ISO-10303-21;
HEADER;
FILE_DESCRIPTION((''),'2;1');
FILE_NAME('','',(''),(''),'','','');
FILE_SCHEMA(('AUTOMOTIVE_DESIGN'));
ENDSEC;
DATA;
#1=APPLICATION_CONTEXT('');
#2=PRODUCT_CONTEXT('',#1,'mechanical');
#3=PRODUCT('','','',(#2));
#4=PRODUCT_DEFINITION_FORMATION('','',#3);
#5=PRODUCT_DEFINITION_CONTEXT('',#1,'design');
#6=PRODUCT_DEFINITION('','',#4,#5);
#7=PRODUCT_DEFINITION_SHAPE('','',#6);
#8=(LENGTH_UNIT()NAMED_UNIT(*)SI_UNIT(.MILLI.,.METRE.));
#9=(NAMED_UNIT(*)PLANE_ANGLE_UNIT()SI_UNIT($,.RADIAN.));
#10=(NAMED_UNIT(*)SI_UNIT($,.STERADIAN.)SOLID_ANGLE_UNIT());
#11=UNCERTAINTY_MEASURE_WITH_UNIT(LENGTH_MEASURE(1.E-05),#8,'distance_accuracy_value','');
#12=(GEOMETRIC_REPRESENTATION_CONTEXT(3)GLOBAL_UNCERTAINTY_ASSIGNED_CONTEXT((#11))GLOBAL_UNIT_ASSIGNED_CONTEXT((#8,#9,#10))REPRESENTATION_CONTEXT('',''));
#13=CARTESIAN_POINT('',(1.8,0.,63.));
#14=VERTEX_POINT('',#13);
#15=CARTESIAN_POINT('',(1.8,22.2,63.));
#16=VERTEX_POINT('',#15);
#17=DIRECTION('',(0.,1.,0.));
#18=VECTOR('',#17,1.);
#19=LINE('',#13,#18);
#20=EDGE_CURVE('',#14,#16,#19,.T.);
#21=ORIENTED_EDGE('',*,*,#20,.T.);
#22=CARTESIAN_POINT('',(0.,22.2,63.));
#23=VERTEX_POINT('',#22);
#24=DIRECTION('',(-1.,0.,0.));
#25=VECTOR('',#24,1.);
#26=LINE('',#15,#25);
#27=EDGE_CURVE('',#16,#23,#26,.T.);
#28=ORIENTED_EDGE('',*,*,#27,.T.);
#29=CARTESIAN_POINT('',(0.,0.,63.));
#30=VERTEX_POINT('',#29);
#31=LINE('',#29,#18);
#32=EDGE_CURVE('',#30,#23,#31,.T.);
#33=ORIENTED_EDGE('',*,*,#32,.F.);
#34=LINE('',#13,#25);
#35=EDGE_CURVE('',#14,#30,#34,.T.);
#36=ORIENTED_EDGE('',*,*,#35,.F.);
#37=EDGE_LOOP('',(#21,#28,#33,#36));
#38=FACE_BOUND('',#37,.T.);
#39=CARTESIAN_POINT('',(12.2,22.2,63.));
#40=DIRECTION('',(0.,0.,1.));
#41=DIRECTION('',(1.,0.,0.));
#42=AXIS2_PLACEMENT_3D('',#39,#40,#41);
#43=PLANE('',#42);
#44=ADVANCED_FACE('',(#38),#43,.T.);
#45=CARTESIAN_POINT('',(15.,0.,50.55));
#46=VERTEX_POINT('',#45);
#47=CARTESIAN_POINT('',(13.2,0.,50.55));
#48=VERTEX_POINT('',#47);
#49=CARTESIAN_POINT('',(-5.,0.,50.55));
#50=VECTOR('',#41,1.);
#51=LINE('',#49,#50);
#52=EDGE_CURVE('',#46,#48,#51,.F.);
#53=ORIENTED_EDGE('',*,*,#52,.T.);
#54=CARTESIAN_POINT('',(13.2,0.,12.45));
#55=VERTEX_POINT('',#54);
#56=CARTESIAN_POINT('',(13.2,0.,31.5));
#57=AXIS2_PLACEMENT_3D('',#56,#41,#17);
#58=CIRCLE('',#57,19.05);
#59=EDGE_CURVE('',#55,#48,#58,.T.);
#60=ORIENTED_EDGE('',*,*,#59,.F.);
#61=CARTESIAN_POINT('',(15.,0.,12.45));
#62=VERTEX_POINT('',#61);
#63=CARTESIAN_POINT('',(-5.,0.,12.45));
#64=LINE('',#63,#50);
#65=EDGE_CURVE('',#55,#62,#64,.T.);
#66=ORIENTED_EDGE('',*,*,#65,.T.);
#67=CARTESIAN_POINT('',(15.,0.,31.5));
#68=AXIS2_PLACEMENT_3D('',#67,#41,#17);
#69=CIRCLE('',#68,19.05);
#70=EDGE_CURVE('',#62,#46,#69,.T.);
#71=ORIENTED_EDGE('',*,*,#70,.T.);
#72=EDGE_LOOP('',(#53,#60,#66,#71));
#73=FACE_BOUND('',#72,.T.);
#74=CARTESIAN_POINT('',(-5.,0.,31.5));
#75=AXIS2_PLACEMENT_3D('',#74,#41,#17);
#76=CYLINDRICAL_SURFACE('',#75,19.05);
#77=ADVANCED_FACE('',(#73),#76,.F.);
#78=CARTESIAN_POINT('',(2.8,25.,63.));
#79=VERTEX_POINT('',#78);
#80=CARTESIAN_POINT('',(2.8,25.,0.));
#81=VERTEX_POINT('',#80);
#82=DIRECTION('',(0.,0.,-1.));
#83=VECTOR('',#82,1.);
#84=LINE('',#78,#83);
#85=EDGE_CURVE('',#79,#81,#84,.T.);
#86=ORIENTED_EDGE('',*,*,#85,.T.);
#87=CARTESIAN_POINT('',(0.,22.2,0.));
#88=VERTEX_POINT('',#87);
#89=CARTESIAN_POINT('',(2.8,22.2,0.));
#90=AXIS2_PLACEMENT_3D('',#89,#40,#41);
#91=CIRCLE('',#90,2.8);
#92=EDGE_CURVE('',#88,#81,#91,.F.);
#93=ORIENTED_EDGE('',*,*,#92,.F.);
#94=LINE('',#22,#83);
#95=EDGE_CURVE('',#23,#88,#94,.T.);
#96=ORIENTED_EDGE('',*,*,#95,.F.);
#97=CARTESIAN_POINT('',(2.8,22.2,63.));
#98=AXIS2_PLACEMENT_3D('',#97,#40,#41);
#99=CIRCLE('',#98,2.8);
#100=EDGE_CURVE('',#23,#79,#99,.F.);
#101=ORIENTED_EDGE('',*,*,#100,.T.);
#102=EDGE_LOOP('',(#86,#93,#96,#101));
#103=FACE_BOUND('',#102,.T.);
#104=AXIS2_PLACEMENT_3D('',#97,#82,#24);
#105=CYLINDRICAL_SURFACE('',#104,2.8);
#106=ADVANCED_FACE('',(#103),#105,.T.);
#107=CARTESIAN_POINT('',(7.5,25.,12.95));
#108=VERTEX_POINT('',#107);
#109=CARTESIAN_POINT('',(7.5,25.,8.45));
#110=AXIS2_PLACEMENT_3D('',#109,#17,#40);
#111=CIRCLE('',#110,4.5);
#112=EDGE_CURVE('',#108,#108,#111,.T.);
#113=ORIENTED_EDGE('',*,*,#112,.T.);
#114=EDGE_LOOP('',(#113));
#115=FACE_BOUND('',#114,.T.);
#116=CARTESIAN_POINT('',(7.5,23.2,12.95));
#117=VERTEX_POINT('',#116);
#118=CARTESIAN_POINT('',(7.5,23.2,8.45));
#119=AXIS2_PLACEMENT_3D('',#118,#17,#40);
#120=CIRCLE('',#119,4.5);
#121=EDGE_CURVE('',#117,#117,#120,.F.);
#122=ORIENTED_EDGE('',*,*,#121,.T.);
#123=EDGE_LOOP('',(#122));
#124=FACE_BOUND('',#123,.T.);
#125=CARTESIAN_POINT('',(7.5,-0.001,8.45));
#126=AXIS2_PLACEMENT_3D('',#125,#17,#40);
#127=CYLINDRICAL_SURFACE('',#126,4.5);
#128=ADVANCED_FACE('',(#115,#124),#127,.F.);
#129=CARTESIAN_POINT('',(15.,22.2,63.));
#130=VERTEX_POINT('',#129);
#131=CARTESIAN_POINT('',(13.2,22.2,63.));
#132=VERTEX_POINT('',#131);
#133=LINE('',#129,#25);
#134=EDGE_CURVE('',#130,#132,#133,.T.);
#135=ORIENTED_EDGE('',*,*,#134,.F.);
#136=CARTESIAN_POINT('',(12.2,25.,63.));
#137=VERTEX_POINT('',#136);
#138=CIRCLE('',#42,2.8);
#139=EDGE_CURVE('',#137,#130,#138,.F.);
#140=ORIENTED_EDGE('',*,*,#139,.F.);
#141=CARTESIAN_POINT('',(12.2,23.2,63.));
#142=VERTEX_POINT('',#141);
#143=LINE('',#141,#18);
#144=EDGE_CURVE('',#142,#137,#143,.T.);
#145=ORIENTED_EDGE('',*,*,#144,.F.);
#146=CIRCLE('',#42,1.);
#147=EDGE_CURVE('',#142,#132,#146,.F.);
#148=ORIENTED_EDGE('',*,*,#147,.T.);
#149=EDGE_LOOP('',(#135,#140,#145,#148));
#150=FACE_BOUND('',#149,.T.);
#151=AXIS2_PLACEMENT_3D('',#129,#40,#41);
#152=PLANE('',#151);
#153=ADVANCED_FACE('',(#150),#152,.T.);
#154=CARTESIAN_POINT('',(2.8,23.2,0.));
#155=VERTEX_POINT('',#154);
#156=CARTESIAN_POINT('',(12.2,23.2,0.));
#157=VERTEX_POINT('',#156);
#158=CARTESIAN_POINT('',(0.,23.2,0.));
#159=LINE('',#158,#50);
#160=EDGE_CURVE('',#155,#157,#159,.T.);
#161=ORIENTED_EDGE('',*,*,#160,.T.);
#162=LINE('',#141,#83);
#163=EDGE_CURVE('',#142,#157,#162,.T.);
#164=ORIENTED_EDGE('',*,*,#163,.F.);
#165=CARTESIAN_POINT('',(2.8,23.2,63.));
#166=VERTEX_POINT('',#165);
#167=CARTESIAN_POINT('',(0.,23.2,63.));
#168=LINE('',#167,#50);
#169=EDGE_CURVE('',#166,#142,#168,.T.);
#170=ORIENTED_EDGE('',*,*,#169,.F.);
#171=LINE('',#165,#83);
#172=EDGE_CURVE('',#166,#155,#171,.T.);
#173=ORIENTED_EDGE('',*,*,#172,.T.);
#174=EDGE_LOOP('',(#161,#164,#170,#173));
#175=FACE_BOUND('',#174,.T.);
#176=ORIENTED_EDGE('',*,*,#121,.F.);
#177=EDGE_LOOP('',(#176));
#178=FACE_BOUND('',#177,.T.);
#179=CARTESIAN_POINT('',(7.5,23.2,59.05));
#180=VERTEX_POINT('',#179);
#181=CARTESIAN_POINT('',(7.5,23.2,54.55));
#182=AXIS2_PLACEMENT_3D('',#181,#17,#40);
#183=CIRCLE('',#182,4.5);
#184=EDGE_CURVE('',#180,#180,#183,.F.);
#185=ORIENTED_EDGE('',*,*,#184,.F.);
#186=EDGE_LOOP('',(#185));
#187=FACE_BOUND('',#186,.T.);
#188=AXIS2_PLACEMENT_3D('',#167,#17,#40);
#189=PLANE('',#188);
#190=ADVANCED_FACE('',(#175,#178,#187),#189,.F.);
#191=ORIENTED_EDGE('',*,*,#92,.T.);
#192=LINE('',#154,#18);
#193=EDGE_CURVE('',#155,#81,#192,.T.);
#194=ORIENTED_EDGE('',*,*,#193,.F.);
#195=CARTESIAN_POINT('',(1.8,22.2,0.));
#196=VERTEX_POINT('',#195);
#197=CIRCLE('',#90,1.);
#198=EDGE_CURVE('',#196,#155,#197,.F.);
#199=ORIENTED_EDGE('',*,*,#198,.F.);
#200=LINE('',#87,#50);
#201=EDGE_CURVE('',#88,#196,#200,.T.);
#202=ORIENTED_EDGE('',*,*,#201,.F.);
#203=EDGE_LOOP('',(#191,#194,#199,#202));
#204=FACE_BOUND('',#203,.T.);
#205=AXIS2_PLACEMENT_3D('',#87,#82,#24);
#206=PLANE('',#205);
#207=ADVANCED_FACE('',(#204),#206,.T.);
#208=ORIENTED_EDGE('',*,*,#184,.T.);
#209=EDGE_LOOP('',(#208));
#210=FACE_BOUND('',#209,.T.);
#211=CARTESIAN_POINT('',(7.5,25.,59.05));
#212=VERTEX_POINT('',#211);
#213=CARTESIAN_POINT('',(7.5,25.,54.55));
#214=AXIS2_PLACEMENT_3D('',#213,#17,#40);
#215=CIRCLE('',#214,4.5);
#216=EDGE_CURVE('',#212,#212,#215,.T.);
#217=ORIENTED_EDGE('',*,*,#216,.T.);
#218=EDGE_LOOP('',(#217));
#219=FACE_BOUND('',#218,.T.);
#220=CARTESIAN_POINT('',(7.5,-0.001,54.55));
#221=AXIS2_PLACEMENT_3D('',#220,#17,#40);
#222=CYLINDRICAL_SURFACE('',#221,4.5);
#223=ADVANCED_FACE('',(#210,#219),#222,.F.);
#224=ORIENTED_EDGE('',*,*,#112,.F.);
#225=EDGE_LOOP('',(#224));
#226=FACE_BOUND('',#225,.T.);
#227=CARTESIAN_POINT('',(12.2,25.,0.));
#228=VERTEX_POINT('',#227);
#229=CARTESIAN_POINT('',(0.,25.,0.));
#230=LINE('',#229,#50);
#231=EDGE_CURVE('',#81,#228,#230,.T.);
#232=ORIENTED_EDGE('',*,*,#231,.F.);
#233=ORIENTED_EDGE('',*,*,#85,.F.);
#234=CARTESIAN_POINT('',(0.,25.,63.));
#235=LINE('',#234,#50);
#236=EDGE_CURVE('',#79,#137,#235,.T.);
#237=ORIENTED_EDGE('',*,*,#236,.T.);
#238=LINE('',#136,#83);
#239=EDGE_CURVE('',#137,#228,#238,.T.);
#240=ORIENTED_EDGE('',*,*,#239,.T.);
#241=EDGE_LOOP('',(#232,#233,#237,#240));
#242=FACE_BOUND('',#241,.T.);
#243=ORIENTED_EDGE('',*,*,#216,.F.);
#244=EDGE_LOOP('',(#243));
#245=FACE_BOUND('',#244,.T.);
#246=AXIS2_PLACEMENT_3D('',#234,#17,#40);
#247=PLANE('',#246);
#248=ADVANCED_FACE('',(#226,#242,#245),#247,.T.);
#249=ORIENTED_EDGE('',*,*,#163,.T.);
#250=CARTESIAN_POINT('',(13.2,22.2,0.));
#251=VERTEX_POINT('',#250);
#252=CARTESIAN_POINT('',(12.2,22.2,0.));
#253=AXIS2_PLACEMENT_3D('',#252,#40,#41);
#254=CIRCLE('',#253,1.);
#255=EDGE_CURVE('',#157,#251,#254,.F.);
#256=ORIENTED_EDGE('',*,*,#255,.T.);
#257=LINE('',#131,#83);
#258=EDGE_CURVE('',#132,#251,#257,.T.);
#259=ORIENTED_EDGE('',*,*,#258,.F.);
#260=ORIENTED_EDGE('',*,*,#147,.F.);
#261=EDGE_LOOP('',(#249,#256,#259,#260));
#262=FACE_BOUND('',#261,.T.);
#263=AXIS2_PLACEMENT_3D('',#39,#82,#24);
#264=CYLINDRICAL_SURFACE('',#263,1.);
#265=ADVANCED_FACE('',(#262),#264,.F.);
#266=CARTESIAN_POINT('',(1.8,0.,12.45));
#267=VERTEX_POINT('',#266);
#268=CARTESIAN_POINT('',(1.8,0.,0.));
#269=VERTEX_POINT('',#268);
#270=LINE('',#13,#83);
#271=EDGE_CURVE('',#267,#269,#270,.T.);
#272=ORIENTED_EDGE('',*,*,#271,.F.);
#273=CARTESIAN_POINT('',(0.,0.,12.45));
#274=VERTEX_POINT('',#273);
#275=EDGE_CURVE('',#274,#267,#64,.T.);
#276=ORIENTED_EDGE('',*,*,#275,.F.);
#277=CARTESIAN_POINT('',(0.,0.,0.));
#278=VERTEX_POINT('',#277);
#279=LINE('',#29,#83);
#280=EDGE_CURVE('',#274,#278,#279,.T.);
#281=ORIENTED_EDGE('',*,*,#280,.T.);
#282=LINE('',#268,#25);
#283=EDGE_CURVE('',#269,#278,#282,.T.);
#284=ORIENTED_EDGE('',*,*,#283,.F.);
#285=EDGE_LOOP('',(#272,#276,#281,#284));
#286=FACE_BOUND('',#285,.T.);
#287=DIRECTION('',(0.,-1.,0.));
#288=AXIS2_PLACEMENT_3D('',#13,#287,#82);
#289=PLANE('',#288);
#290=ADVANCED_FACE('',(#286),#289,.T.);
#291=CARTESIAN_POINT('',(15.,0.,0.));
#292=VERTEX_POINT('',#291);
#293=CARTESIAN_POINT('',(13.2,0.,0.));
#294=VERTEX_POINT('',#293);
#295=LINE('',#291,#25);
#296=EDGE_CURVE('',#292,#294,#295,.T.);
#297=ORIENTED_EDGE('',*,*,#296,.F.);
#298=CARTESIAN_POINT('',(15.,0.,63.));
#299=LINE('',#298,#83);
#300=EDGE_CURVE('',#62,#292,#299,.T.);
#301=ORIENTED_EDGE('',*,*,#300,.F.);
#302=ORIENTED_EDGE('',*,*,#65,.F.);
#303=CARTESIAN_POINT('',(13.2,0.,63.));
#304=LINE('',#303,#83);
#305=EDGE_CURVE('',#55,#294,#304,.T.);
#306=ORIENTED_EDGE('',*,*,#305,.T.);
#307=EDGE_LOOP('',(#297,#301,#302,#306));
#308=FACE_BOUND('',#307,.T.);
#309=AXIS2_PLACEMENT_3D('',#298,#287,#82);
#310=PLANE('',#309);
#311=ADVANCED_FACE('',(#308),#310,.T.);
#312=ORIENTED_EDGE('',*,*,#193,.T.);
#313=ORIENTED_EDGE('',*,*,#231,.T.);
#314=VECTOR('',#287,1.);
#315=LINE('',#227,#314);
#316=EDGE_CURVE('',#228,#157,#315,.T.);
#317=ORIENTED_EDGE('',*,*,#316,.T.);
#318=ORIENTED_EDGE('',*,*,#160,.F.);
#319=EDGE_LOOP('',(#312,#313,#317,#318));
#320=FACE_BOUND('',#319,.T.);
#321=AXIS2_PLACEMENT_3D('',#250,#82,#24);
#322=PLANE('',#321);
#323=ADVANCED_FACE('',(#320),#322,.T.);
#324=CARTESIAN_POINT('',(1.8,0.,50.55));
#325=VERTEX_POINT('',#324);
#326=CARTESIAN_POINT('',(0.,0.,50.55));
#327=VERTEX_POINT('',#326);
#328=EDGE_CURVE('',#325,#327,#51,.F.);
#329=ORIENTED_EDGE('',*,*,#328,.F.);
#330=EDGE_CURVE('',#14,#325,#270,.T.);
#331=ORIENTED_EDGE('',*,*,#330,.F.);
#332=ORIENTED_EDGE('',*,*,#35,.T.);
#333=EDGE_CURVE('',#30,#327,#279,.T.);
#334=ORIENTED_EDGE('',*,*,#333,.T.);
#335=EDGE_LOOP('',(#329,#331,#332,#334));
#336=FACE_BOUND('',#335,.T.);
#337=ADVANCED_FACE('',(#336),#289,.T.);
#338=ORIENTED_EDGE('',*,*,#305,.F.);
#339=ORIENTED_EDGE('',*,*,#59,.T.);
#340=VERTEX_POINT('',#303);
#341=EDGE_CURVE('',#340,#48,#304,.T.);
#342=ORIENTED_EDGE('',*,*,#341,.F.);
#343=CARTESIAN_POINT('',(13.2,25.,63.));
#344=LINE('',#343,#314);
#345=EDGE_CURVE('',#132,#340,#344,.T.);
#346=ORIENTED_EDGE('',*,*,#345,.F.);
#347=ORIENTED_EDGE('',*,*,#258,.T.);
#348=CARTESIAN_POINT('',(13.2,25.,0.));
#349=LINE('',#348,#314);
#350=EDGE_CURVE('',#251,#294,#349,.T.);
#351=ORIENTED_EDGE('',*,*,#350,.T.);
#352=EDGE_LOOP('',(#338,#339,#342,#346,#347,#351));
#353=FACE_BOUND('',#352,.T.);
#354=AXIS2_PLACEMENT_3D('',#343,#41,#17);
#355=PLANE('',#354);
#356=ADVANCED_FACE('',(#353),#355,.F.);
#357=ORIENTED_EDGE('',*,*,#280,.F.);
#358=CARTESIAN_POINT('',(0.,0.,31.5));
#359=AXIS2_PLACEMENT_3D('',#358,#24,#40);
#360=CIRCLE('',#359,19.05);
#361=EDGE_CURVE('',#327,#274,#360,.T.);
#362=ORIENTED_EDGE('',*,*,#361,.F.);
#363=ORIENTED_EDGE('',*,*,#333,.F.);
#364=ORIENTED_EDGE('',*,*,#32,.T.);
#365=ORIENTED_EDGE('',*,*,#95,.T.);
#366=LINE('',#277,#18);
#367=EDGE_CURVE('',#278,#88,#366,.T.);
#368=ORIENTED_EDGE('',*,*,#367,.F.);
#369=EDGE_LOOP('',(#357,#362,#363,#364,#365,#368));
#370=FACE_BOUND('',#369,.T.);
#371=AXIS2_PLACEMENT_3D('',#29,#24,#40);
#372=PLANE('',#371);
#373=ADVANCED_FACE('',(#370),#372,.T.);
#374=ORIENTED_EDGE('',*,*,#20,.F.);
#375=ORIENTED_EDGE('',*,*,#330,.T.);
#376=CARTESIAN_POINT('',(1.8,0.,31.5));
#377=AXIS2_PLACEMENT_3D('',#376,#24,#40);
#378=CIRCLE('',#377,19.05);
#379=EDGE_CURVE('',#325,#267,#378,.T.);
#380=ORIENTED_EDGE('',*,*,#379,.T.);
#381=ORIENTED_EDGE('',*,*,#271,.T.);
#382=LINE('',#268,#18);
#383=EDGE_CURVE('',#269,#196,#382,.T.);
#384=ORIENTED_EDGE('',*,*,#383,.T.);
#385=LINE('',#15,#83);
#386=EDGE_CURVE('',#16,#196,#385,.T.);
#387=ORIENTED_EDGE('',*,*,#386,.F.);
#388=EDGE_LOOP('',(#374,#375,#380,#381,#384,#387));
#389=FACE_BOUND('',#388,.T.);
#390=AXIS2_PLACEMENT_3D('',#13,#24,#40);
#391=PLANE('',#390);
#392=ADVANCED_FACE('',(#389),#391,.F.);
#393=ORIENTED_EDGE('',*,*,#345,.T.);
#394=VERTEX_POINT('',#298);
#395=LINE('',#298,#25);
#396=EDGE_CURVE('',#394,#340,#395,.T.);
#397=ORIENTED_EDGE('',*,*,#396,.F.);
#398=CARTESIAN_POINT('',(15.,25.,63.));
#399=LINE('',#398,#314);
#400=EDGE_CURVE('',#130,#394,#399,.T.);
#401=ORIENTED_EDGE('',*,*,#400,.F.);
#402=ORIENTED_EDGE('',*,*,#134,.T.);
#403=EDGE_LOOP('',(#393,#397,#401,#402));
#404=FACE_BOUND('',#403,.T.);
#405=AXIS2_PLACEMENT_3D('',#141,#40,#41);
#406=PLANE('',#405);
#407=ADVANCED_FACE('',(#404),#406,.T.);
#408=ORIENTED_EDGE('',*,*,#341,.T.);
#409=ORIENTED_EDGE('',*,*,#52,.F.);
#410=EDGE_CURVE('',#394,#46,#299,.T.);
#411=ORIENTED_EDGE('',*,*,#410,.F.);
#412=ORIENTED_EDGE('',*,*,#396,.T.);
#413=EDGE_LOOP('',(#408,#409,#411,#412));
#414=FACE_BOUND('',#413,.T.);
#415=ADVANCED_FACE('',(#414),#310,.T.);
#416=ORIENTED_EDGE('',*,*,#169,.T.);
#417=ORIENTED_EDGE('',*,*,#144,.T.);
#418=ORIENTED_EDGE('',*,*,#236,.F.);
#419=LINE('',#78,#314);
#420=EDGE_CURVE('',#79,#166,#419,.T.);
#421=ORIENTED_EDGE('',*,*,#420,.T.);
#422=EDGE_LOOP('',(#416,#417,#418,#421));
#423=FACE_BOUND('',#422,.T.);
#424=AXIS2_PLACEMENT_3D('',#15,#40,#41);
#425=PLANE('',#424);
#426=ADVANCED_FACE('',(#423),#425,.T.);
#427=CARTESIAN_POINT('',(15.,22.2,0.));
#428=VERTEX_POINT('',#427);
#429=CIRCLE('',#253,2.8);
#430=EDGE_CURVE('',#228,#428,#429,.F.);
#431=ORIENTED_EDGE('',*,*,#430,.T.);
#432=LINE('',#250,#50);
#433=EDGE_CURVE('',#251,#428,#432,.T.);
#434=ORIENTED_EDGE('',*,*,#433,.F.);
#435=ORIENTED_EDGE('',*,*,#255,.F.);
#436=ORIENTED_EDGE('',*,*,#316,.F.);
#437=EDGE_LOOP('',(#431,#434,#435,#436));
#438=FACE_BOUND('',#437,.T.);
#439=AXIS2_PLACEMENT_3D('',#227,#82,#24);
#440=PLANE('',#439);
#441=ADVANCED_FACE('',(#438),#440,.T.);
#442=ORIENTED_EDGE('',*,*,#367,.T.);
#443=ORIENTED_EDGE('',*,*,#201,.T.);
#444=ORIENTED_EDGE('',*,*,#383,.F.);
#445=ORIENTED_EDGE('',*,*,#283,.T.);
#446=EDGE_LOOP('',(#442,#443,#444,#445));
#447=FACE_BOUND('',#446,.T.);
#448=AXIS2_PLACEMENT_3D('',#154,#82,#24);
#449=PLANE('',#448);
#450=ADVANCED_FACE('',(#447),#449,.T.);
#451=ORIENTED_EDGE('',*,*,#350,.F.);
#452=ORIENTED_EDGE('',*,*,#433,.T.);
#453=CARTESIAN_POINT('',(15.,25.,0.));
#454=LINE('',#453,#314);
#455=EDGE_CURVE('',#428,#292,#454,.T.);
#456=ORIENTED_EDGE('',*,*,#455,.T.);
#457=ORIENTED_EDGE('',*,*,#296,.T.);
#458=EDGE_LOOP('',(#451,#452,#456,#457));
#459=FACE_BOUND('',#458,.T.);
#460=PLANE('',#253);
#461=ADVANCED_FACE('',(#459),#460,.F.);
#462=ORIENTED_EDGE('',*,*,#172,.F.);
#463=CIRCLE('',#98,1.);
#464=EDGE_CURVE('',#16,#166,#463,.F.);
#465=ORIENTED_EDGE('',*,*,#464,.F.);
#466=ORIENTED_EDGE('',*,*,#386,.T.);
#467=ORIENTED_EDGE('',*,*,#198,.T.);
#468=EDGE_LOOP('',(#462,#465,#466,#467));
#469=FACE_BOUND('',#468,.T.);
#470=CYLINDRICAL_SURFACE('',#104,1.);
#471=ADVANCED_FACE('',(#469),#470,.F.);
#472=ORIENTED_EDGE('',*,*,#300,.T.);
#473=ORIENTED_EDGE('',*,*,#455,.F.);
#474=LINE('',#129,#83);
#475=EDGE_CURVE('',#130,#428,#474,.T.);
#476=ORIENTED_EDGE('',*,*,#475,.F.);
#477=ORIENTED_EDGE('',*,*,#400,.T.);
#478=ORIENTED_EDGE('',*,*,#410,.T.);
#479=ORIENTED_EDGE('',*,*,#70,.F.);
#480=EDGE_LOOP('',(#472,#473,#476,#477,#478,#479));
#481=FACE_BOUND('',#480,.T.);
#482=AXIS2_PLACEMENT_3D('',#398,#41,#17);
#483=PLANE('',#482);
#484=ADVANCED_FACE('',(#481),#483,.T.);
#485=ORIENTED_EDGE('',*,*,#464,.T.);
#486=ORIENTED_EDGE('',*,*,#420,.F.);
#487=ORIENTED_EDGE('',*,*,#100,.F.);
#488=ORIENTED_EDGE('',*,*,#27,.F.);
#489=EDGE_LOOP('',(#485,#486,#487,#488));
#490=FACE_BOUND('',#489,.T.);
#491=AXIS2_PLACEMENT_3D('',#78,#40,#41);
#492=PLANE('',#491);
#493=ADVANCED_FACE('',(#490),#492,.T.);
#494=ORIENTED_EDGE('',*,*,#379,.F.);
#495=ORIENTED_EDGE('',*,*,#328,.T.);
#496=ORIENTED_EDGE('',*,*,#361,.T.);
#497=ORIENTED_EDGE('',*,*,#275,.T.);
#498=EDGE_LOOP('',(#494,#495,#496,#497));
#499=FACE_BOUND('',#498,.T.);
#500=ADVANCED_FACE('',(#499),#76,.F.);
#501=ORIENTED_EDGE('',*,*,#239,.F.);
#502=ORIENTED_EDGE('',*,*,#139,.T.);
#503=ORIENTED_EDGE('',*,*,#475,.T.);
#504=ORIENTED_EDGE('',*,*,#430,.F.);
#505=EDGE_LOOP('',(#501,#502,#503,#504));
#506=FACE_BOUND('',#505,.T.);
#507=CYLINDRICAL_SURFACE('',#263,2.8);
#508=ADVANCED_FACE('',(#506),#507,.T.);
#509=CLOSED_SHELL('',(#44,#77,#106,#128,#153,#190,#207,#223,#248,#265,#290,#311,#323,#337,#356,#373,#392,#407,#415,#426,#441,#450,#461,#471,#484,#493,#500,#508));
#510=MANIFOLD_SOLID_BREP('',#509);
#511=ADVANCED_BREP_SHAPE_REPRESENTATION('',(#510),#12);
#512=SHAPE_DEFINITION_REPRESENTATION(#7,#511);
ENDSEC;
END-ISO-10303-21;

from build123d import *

# Parameters (mm, degrees)
FLANGE_BASE1_DEPTH    = 63
ESBO_O6_R             = 19.05
CORTE_EXTRUS_O1_DEPTH = 20
CORTE_EXTRUS_O2_REACH = 71.419
ESBO_O7_R             = 4.5


# Sheet-metal steps are written as plain solids
with BuildPart() as part:
    # Esboço1 → Flange-base1 (new body)
    with BuildSketch(Plane.XY):
        with BuildLine():
            Line((0, 0), (0, 22.2))
            ThreePointArc((0, 22.2), (0.820101013, 24.179898987), (2.8, 25))
            Line((2.8, 25), (12.2, 25))
            ThreePointArc((12.2, 25), (14.179898987, 24.179898987), (15, 22.2))
            Line((15, 22.2), (15, 0))
            Line((15, 0), (13.2, 0))
            Line((13.2, 0), (13.2, 22.2))
            ThreePointArc((13.2, 22.2), (12.907106781, 22.907106781), (12.2, 23.2))
            Line((12.2, 23.2), (2.8, 23.2))
            ThreePointArc((2.8, 23.2), (2.092893219, 22.907106781), (1.8, 22.2))
            Line((1.8, 22.2), (1.8, 0))
            Line((1.8, 0), (0, 0))
        make_face()
    extrude(amount=FLANGE_BASE1_DEPTH)

    # Esboço6 → Corte-extrusão1 (cut)
    with BuildSketch(Plane(origin=(15, 0, 0), x_dir=(0, 0, -1), z_dir=(1, 0, 0))):
        with Locations((-31.5, 0)):
            Circle(ESBO_O6_R)
    extrude(amount=-CORTE_EXTRUS_O1_DEPTH, mode=Mode.SUBTRACT)

    # Esboço7 → Corte-extrusão2 (cut, up to next)
    with BuildSketch(Plane(origin=(0, 25, 0), x_dir=(1, 0, 0), z_dir=(0, 1, 0)), mode=Mode.PRIVATE) as corte_extrus_o2_sk1:
        with Locations(Location((7.5, -54.55, 0), (0, 0, 270))):
            Circle(ESBO_O7_R)
    corte_extrus_o2_tool1 = extrude(corte_extrus_o2_sk1.sketch, amount=-CORTE_EXTRUS_O2_REACH, mode=Mode.PRIVATE) & part.part
    # Esboço7 → Corte-extrusão2 (cut, up to next)
    with BuildSketch(Plane(origin=(0, 25, 0), x_dir=(1, 0, 0), z_dir=(0, 1, 0)), mode=Mode.PRIVATE) as corte_extrus_o2_sk2:
        with Locations(Location((7.5, -8.45, 0), (0, 0, 270))):
            Circle(ESBO_O7_R)
    corte_extrus_o2_tool2 = extrude(corte_extrus_o2_sk2.sketch, amount=-CORTE_EXTRUS_O2_REACH, mode=Mode.PRIVATE) & part.part
    add(corte_extrus_o2_tool1.solids().sort_by_distance((7.5, 25, 54.55))[0], mode=Mode.SUBTRACT)
    add(corte_extrus_o2_tool2.solids().sort_by_distance((7.5, 25, 8.45))[0], mode=Mode.SUBTRACT)


solid = part.part
